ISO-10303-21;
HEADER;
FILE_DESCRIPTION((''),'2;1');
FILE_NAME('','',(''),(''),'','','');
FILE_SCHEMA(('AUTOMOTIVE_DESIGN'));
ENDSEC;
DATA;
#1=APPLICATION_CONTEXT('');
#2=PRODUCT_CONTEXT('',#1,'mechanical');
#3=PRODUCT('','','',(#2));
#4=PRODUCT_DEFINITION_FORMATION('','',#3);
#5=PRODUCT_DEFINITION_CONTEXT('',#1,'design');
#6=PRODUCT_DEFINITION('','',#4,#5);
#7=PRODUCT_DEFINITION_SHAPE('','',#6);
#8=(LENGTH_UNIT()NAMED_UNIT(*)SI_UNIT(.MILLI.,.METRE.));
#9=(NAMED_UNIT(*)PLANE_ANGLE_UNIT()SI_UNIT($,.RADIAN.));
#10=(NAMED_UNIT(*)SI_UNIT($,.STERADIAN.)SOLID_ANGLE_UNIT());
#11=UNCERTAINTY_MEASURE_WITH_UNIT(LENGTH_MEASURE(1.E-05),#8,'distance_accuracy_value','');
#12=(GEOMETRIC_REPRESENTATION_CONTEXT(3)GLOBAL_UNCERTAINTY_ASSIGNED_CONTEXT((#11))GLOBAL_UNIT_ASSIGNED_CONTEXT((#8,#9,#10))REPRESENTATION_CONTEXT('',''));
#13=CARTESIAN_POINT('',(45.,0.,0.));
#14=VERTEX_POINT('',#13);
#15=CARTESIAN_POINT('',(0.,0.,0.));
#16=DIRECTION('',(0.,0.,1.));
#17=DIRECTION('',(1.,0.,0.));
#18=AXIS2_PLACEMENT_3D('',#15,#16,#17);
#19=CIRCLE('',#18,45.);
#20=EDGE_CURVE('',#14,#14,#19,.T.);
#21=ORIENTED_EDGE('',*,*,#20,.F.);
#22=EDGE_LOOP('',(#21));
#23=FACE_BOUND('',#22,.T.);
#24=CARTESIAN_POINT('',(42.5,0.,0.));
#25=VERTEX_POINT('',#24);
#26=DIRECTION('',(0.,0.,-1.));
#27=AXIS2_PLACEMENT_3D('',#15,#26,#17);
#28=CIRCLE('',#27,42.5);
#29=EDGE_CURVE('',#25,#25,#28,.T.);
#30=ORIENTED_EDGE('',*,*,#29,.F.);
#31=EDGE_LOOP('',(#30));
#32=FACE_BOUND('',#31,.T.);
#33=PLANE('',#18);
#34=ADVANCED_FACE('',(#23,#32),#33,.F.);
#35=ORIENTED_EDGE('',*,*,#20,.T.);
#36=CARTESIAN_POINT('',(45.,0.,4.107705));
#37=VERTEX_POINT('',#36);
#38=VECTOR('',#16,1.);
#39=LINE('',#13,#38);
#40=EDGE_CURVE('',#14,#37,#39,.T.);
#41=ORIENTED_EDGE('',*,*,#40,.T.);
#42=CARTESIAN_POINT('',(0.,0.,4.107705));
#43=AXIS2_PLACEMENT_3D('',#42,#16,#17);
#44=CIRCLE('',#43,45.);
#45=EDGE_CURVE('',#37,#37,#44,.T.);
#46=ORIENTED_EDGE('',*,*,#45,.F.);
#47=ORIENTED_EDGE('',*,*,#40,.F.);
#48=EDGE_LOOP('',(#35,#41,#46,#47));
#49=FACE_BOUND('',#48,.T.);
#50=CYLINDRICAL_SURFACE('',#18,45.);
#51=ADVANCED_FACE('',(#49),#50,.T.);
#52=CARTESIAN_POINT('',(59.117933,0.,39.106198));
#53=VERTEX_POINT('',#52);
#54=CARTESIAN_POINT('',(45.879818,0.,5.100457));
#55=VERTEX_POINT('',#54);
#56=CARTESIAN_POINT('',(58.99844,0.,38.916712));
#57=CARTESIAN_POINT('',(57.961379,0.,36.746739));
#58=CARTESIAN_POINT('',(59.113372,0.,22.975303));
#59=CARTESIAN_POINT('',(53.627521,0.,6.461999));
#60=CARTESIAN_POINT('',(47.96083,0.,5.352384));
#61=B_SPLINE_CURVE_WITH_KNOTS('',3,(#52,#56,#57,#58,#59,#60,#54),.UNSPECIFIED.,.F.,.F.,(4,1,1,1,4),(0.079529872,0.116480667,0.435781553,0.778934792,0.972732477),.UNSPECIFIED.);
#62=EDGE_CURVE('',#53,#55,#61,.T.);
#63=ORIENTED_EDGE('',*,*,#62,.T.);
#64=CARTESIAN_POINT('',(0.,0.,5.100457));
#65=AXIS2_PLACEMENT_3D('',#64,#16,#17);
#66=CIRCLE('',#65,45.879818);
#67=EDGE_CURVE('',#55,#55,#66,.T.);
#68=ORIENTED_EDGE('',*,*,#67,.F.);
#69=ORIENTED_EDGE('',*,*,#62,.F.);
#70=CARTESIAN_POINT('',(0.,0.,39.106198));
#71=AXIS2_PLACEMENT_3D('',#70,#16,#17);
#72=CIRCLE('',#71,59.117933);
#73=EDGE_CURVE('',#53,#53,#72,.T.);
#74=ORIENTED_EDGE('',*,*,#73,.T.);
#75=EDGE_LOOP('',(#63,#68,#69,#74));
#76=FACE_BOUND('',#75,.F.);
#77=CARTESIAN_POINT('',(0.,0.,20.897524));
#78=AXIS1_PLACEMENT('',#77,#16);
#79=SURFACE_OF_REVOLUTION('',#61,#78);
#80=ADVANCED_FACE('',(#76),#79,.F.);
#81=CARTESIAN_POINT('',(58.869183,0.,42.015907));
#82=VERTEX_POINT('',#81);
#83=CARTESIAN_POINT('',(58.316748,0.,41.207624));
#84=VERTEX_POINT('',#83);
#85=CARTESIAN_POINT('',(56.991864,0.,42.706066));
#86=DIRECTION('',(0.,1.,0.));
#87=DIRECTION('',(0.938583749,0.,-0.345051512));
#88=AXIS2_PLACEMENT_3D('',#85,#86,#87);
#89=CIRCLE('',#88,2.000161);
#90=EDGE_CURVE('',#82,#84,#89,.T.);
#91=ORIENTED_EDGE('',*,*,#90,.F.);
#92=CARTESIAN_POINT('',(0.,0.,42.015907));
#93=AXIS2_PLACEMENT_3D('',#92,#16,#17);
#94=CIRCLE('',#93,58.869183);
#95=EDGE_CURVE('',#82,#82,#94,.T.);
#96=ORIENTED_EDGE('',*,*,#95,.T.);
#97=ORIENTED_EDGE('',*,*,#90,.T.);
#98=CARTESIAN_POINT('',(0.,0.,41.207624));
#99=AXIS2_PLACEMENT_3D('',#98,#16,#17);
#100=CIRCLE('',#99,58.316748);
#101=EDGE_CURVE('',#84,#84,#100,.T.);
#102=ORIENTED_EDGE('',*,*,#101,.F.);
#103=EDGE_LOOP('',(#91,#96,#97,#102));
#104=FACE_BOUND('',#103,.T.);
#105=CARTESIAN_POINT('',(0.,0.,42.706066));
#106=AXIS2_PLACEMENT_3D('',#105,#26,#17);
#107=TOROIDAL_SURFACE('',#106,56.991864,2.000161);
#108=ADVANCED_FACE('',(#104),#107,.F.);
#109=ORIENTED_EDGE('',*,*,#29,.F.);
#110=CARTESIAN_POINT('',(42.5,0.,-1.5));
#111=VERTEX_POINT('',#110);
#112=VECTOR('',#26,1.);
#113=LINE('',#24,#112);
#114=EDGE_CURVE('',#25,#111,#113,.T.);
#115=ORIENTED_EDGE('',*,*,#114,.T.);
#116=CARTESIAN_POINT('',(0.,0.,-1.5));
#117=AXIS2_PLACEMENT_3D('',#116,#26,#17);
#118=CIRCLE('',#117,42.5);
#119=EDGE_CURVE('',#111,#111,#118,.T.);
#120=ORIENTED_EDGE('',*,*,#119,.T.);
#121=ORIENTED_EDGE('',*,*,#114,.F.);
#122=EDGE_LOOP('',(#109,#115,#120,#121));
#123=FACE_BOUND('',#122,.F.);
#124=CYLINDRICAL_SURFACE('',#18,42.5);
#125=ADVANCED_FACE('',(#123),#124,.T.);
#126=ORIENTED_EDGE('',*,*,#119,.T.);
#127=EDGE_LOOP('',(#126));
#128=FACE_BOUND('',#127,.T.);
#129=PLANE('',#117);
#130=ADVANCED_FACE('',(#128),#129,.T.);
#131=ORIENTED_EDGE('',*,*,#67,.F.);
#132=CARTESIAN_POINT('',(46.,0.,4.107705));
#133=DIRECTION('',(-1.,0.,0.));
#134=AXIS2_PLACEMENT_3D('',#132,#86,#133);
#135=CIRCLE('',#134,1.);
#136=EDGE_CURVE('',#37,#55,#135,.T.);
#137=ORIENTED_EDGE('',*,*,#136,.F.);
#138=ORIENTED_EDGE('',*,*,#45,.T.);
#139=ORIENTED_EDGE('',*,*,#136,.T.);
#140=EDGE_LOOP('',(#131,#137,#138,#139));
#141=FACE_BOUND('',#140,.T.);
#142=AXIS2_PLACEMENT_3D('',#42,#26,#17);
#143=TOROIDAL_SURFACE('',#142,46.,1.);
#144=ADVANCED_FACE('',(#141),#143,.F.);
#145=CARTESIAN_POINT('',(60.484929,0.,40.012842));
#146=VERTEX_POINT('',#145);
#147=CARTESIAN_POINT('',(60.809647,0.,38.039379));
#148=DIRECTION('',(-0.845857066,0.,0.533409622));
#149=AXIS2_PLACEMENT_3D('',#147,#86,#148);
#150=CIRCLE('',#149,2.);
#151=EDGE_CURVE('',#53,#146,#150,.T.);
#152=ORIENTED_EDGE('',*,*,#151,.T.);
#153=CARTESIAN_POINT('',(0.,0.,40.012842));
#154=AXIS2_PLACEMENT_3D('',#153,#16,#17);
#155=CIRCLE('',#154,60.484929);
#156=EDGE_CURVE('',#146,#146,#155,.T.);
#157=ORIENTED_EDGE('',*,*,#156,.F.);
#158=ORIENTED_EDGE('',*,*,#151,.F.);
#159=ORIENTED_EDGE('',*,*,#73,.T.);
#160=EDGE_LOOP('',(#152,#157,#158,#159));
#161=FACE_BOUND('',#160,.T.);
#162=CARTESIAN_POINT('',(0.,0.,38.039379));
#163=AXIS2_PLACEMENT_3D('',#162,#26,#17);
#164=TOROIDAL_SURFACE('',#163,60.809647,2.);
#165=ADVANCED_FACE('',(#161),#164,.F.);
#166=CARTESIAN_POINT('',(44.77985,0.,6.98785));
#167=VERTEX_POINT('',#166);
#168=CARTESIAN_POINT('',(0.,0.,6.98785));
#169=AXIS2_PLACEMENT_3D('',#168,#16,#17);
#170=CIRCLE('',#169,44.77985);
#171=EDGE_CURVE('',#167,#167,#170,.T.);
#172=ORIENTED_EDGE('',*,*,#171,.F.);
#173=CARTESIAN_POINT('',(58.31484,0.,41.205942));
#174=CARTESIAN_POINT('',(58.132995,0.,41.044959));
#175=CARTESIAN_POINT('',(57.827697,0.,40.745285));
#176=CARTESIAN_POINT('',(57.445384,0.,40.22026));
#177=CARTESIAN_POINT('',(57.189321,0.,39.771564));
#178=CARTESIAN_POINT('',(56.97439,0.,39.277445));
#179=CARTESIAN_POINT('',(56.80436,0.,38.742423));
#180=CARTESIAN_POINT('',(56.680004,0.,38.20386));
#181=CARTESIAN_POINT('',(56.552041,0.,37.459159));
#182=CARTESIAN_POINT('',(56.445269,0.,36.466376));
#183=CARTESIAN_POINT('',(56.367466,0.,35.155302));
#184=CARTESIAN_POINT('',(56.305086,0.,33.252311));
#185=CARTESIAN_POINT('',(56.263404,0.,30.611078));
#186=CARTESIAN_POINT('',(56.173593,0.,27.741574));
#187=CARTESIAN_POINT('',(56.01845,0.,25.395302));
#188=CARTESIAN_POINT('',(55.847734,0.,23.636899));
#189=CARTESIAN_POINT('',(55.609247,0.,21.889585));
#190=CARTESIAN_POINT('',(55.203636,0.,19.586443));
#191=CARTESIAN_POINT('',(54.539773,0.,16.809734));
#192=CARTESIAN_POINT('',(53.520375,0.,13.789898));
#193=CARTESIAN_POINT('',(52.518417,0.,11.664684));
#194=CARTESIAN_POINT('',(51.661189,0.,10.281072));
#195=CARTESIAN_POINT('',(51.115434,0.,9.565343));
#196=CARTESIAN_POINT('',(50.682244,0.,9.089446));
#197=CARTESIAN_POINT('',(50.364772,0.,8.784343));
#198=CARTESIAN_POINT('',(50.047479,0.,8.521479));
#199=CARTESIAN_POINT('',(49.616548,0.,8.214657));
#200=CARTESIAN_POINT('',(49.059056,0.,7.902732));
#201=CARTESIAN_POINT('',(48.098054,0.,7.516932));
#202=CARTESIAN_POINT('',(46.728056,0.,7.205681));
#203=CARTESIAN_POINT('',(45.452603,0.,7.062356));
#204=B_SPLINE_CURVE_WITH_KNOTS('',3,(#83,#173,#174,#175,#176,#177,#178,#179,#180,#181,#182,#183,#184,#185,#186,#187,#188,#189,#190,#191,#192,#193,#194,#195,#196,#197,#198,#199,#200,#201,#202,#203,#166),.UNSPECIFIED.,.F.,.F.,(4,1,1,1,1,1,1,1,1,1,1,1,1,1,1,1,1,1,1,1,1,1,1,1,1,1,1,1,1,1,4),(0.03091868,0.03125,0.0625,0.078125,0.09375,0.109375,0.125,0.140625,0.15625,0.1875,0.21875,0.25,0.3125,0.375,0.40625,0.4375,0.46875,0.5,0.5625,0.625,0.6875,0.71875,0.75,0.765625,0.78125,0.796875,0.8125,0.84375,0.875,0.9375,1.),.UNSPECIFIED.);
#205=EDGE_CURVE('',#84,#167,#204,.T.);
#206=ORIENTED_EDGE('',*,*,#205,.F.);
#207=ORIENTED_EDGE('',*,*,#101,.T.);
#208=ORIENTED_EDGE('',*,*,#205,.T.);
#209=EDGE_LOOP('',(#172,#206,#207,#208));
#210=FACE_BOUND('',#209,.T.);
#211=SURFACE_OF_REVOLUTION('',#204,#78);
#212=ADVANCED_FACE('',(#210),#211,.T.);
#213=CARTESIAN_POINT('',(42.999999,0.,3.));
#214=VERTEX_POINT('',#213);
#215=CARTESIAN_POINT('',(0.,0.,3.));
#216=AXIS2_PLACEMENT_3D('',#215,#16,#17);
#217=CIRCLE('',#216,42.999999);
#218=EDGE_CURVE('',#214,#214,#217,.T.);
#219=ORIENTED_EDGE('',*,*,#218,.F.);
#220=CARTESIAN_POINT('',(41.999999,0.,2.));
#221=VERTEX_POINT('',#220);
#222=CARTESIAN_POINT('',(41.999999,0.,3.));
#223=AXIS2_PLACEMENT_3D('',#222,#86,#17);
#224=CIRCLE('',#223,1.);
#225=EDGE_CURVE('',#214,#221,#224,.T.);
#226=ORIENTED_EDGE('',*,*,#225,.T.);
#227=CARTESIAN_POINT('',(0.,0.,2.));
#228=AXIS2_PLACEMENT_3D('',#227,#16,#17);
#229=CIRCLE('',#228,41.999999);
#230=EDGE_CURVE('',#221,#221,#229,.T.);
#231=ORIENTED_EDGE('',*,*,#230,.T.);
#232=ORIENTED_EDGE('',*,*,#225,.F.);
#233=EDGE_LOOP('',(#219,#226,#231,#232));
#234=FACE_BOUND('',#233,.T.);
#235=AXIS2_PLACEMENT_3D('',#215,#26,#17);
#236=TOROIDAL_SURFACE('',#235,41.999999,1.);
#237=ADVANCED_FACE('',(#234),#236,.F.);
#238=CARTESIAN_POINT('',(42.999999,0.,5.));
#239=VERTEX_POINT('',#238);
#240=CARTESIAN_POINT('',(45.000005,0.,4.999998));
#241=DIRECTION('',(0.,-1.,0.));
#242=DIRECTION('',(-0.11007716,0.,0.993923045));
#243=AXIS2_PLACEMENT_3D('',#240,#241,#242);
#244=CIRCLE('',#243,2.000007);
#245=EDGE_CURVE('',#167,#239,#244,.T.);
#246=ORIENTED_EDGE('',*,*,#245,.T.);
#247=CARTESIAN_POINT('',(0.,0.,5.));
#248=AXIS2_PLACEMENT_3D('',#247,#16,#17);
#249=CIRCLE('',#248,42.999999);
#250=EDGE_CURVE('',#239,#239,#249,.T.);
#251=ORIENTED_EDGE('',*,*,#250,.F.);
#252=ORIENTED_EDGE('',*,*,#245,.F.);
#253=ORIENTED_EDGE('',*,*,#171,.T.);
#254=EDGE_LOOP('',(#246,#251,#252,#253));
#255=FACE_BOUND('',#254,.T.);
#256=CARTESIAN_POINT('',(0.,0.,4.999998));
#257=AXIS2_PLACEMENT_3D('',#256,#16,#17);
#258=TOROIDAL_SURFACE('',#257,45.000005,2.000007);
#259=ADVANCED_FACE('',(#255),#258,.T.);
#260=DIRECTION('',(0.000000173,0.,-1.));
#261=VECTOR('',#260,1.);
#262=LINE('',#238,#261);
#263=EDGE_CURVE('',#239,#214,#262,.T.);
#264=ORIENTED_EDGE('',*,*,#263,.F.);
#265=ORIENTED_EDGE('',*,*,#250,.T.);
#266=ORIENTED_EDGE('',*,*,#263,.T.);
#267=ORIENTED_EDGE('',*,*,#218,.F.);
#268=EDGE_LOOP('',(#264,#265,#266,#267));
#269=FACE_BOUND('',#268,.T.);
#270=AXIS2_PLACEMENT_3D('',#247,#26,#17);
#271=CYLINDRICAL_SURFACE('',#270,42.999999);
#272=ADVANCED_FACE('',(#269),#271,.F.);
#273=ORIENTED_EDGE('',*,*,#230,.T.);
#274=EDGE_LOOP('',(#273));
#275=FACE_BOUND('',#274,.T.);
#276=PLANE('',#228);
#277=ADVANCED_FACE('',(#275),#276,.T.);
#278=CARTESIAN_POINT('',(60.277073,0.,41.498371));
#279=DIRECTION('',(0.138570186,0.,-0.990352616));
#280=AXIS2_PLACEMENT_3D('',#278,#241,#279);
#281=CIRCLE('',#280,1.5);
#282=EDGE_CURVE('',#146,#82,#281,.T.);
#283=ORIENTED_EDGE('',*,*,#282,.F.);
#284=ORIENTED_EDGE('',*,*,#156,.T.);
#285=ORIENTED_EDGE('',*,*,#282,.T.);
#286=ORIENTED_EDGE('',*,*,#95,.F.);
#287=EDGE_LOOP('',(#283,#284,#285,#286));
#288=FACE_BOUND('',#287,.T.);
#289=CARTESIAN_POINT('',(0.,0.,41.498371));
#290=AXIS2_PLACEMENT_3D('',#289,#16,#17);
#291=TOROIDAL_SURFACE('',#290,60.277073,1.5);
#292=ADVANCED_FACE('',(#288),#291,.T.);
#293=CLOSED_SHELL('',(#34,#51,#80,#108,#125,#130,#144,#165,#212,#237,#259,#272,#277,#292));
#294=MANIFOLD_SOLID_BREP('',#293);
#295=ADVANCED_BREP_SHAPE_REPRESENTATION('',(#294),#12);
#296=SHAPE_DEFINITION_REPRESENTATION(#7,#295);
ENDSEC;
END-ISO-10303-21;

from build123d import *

# Parameters (mm, degrees)
F2_R     = 1
F3_R     = 42.5
F4_DEPTH = 1.5


# Not quite as in the source:
# - ends of sketch curves that miss each other by under 0.0002 mm in the source are joined
# - the dataset's text gives a spline's control points without its knots; the knots are read off the source's solid


with BuildPart() as f1:
    # F0 (on Front) → F1 (revolve)
    with BuildSketch(Plane.XZ):
        with BuildLine():
            Line((0, 2), (0, 0))
            Line((0, 0), (45, 0))
            Line((45, 0), (45, 4.1077052209))
            ThreePointArc((45, 4.1077052209), (45.251607634, 4.770961481), (45.8798177332, 5.1004570644))
            add(Edge.make_bspline(
                [(59.117932503, 39.1061978883), (58.9984398686, 38.9167118255), (57.961379378, 36.7467385449), (59.1133721589, 22.9753032204), (53.6275212518, 6.4619991243), (47.9608297571, 5.3523838112), (45.8798177332, 5.1004570644)],
                knots=[0.079529872, 0.079529872, 0.079529872, 0.079529872, 0.1164806675, 0.435781553, 0.7789347917, 0.9727324769, 0.9727324769, 0.9727324769, 0.9727324769], degree=3))
            ThreePointArc((59.117932503, 39.1061978883), (59.7042053248, 39.7061118302), (60.4849287438, 40.0128421715))
            ThreePointArc((60.4849287438, 40.0128421715), (61.4445872468, 42.4401309197), (58.8691826, 42.0159069052))
            ThreePointArc((58.8691826, 42.0159069052), (58.643182834, 41.577442369), (58.31674753, 41.2076237072))
            add(Edge.make_bspline(
                [(58.31674753, 41.2076237072), (58.3148397341, 41.2059420359), (58.1329946532, 41.0449587485), (57.8276969018, 40.7452853769), (57.4453837385, 40.220259631), (57.1893214461, 39.771564073), (56.9743902421, 39.277445408), (56.8043597407, 38.7424234539), (56.680003708, 38.203859582), (56.5520410764, 37.4591588813), (56.4452689195, 36.4663757584), (56.3674656809, 35.155302403), (56.3050858948, 33.2523114152), (56.2634042278, 30.6110777497), (56.1735934989, 27.7415742893), (56.018450433, 25.3953023971), (55.8477339812, 23.6368985798), (55.6092469781, 21.8895853556), (55.2036356572, 19.5864432025), (54.539773, 16.8097339131), (53.5203746444, 13.7898979021), (52.5184171783, 11.6646836577), (51.6611889381, 10.2810715096), (51.1154343385, 9.5653431356), (50.6822443153, 9.0894464967), (50.3647724491, 8.7843429997), (50.0474792797, 8.5214792406), (49.6165481094, 8.2146567762), (49.059056291, 7.9027315772), (48.0980536701, 7.5169322584), (46.7280561328, 7.2056808972), (45.4526028209, 7.0623561488), (44.7798504425, 6.9878504754)],
                knots=[0.0309186802, 0.0309186802, 0.0309186802, 0.0309186802, 0.03125, 0.0625, 0.078125, 0.09375, 0.109375, 0.125, 0.140625, 0.15625, 0.1875, 0.21875, 0.25, 0.3125, 0.375, 0.40625, 0.4375, 0.46875, 0.5, 0.5625, 0.625, 0.6875, 0.71875, 0.75, 0.765625, 0.78125, 0.796875, 0.8125, 0.84375, 0.875, 0.9375, 1, 1, 1, 1], degree=3))
            ThreePointArc((44.7798504425, 6.9878504754), (43.5099827366, 6.3341112085), (42.9999989595, 5))
            Line((42.9999989595, 5), (42.9999994798, 2))
            Line((42.9999994798, 2), (0, 2))
        make_face()
    revolve(axis=Axis((0, 0, 20.8975244313), (0, 0, 1)))

    # F2
    f2_edges = [f1.edges().sort_by_distance(p)[0] for p in [
        (-42.999999, 0, 2),
    ]]
    fillet(f2_edges, radius=F2_R)

    # F3 (on face) → F4 (join)
    with BuildSketch(Plane(origin=(0, 0, 0), x_dir=(1, 0, 0), z_dir=(0, 0, -1))):
        Circle(F3_R)
    extrude(amount=F4_DEPTH)


solid = f1.part
